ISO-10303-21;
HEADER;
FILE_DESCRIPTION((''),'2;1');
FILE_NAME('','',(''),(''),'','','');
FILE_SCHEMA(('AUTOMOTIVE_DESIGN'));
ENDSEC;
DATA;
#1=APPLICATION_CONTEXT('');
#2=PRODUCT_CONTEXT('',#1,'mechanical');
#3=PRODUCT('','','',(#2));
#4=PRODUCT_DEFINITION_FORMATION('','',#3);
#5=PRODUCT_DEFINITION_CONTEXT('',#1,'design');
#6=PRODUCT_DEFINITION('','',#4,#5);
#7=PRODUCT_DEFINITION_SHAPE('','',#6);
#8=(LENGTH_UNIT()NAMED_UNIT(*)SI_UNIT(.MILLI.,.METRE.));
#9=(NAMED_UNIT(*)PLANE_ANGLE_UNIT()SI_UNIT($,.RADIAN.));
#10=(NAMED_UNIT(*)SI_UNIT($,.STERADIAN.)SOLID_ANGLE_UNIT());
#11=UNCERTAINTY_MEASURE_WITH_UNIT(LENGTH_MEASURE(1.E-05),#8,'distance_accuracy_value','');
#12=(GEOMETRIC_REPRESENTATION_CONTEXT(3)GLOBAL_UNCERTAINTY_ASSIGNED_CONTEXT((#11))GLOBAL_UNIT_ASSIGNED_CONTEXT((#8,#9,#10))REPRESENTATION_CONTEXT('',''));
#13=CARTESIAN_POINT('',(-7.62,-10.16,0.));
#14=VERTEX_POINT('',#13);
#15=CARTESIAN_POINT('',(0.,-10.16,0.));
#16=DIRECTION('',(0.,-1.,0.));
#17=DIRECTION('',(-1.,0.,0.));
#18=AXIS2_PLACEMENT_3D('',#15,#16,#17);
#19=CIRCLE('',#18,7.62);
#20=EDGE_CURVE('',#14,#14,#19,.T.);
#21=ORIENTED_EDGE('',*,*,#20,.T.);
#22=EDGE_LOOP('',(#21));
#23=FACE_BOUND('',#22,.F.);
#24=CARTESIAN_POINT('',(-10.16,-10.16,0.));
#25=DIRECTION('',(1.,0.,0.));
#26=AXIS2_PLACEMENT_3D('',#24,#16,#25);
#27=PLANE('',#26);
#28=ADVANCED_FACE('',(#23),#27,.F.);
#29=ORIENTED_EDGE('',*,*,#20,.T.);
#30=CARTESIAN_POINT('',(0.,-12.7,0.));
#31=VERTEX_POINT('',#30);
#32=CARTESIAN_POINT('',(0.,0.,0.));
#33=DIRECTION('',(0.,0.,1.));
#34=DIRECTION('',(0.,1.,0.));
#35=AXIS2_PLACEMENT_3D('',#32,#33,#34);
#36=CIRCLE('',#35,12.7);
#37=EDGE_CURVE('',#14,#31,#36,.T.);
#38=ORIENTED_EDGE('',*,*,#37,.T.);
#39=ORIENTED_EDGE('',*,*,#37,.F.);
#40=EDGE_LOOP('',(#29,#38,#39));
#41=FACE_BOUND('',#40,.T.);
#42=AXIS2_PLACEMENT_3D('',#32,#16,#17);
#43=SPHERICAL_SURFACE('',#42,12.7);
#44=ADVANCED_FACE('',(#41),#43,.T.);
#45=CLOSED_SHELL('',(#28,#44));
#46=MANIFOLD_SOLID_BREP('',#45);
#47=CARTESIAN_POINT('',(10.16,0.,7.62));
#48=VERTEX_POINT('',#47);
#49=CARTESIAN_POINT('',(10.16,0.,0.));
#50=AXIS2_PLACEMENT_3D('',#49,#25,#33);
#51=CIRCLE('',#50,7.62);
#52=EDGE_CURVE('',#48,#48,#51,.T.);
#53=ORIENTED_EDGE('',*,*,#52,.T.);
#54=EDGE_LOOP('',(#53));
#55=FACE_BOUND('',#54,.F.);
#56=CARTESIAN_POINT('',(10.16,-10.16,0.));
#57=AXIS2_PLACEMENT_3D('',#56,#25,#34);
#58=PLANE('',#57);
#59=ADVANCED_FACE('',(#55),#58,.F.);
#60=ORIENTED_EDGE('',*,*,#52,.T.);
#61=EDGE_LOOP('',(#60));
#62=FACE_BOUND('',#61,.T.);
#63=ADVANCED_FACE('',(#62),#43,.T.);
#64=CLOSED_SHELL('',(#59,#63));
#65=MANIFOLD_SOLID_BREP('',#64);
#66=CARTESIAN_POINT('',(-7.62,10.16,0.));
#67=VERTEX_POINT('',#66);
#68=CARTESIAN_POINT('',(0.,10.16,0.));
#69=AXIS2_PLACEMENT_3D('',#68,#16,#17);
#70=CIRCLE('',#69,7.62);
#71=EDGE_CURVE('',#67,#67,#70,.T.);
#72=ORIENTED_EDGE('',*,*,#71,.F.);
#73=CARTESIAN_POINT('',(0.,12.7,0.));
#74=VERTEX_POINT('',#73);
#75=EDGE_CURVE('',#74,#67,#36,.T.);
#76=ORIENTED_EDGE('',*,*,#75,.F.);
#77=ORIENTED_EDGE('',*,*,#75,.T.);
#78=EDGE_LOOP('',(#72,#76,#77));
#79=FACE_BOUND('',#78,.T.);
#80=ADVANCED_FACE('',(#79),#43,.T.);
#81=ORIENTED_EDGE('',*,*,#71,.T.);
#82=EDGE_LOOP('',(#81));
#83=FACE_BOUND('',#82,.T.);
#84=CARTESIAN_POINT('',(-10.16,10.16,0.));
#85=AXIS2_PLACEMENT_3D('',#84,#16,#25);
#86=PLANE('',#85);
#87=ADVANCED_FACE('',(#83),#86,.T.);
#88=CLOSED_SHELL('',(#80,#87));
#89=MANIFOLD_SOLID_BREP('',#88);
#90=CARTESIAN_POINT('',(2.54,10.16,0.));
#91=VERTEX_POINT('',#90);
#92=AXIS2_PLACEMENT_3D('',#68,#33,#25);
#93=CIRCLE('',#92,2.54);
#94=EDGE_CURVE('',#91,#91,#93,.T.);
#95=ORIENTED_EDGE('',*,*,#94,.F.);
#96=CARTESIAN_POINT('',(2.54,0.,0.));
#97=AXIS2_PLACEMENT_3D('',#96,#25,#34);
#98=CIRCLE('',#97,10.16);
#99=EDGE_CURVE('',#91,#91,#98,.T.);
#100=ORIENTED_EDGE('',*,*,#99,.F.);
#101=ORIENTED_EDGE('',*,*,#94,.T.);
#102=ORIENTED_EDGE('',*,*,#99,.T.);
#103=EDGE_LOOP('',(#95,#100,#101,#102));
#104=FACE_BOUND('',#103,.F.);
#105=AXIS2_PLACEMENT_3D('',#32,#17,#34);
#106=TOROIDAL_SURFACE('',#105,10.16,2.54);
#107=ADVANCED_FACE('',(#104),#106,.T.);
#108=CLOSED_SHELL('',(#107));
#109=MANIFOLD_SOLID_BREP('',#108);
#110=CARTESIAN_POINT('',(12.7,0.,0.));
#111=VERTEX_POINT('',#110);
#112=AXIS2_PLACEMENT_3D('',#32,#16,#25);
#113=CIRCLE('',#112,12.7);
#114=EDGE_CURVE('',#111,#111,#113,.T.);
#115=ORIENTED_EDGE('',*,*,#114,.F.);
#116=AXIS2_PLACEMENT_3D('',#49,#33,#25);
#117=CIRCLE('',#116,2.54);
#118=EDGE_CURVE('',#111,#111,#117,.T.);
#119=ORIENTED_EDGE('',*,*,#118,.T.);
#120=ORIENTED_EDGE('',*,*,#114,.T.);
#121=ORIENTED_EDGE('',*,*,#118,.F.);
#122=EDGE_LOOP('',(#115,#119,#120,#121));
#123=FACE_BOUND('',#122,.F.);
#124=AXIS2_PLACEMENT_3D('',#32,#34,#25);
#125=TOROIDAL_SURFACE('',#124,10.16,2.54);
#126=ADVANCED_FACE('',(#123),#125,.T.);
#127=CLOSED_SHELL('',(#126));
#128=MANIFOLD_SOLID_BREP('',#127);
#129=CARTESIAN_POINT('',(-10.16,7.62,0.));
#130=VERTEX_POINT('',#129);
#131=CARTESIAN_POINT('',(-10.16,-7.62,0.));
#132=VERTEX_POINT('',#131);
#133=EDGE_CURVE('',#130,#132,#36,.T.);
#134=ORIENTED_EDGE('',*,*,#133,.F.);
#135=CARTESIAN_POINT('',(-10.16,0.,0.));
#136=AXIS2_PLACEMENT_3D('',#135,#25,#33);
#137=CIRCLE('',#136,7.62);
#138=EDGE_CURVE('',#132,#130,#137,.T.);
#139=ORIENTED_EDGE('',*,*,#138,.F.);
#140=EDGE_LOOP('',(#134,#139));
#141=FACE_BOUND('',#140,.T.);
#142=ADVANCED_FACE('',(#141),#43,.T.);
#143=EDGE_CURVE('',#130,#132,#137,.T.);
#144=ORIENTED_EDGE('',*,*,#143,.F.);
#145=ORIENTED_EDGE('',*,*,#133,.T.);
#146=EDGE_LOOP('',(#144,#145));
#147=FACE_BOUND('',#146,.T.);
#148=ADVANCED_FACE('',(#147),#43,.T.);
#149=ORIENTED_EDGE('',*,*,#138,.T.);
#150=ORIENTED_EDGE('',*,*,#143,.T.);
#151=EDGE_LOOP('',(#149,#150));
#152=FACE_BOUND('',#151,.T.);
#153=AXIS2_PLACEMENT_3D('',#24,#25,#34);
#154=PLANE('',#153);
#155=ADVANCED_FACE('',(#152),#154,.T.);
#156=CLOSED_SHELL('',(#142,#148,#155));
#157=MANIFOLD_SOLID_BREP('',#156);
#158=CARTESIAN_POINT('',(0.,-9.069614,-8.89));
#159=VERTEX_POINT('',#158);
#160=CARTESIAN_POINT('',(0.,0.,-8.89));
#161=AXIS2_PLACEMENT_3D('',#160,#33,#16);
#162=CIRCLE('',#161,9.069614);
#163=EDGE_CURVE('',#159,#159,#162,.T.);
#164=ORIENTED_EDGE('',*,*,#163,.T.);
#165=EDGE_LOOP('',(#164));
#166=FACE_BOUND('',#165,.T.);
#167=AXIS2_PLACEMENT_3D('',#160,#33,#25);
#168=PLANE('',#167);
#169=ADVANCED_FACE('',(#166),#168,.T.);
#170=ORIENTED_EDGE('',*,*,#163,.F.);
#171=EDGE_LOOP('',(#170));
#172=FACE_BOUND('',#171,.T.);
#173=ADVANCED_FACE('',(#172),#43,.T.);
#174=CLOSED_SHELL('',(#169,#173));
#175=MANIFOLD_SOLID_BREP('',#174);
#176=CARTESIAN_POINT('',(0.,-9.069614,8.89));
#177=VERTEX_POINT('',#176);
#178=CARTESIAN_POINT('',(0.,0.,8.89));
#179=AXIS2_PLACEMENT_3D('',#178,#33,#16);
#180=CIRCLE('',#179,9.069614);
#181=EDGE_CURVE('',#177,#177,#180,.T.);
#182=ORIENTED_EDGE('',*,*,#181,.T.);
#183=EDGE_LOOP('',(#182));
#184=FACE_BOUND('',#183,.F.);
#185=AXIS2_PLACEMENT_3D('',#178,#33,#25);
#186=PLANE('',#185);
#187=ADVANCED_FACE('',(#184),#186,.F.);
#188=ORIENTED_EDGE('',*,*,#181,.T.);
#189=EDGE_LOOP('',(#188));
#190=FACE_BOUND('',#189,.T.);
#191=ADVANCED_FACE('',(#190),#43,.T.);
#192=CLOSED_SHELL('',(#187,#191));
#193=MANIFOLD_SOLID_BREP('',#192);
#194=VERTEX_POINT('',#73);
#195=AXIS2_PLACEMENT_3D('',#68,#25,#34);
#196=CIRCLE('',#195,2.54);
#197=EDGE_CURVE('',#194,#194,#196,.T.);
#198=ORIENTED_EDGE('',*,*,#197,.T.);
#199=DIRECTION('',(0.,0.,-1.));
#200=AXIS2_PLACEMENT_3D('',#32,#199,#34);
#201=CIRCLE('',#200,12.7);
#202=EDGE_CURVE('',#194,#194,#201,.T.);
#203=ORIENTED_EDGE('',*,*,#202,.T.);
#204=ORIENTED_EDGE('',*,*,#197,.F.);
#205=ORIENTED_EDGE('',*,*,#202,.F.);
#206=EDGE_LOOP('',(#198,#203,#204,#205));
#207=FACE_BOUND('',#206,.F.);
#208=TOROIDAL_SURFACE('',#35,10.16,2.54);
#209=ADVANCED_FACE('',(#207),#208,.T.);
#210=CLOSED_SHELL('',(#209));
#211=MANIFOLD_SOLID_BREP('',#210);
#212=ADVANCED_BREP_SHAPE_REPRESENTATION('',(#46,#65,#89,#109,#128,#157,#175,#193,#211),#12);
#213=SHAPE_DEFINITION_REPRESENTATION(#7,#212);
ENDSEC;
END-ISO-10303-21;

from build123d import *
from build123d import SkipClean  # not in build123d's __all__

# Parameters (mm, degrees)
F2_W     = 20.32
F2_H     = 20.32
F3_DEPTH = 8.89
F4_R     = 2.54
F6_R     = 2.54
F8_R     = 2.54


with BuildPart() as f1:
    # F0 (on Top) → F1 (revolve)
    with BuildSketch(Plane.XY):
        with BuildLine():
            Line((0, -12.7), (0, 12.7))
            ThreePointArc((0, 12.7), (-12.7, 0), (0, -12.7))
        make_face()
    revolve(axis=Axis((0, 0, 0), (0, -1, 0)))

    # F2 (on Top) → F3 (cut, symmetric)
    with BuildSketch(Plane.XY):
        Rectangle(F2_W, F2_H)
    with SkipClean():  # cleaning this boolean's faces spoils the solid; the shape is the same uncleaned
        extrude(amount=F3_DEPTH, both=True, mode=Mode.SUBTRACT)


with BuildPart() as f5:
    # F4 (on Top) → F5 (revolve)
    with BuildSketch(Plane.XY):
        with Locations((10.16, 0)):
            Circle(F4_R)
    revolve(axis=Axis((0, -5.3515611752, 0), (0, -1, 0)))


with BuildPart() as f7:
    # F6 (on Top) → F7 (revolve)
    with BuildSketch(Plane.XY):
        with Locations((0, 10.16)):
            Circle(F6_R)
    revolve(axis=Axis((7.3015755042, 0, 0), (1, 0, 0)))


with BuildPart() as f9:
    # F8 (on Right) → F9 (revolve)
    with BuildSketch(Plane.YZ):
        with Locations((10.16, 0)):
            Circle(F8_R)
    revolve(axis=Axis((0, 0, -7.2491783649), (0, 0, -1)))


solid = Compound([f1.part, f5.part, f7.part, f9.part])
